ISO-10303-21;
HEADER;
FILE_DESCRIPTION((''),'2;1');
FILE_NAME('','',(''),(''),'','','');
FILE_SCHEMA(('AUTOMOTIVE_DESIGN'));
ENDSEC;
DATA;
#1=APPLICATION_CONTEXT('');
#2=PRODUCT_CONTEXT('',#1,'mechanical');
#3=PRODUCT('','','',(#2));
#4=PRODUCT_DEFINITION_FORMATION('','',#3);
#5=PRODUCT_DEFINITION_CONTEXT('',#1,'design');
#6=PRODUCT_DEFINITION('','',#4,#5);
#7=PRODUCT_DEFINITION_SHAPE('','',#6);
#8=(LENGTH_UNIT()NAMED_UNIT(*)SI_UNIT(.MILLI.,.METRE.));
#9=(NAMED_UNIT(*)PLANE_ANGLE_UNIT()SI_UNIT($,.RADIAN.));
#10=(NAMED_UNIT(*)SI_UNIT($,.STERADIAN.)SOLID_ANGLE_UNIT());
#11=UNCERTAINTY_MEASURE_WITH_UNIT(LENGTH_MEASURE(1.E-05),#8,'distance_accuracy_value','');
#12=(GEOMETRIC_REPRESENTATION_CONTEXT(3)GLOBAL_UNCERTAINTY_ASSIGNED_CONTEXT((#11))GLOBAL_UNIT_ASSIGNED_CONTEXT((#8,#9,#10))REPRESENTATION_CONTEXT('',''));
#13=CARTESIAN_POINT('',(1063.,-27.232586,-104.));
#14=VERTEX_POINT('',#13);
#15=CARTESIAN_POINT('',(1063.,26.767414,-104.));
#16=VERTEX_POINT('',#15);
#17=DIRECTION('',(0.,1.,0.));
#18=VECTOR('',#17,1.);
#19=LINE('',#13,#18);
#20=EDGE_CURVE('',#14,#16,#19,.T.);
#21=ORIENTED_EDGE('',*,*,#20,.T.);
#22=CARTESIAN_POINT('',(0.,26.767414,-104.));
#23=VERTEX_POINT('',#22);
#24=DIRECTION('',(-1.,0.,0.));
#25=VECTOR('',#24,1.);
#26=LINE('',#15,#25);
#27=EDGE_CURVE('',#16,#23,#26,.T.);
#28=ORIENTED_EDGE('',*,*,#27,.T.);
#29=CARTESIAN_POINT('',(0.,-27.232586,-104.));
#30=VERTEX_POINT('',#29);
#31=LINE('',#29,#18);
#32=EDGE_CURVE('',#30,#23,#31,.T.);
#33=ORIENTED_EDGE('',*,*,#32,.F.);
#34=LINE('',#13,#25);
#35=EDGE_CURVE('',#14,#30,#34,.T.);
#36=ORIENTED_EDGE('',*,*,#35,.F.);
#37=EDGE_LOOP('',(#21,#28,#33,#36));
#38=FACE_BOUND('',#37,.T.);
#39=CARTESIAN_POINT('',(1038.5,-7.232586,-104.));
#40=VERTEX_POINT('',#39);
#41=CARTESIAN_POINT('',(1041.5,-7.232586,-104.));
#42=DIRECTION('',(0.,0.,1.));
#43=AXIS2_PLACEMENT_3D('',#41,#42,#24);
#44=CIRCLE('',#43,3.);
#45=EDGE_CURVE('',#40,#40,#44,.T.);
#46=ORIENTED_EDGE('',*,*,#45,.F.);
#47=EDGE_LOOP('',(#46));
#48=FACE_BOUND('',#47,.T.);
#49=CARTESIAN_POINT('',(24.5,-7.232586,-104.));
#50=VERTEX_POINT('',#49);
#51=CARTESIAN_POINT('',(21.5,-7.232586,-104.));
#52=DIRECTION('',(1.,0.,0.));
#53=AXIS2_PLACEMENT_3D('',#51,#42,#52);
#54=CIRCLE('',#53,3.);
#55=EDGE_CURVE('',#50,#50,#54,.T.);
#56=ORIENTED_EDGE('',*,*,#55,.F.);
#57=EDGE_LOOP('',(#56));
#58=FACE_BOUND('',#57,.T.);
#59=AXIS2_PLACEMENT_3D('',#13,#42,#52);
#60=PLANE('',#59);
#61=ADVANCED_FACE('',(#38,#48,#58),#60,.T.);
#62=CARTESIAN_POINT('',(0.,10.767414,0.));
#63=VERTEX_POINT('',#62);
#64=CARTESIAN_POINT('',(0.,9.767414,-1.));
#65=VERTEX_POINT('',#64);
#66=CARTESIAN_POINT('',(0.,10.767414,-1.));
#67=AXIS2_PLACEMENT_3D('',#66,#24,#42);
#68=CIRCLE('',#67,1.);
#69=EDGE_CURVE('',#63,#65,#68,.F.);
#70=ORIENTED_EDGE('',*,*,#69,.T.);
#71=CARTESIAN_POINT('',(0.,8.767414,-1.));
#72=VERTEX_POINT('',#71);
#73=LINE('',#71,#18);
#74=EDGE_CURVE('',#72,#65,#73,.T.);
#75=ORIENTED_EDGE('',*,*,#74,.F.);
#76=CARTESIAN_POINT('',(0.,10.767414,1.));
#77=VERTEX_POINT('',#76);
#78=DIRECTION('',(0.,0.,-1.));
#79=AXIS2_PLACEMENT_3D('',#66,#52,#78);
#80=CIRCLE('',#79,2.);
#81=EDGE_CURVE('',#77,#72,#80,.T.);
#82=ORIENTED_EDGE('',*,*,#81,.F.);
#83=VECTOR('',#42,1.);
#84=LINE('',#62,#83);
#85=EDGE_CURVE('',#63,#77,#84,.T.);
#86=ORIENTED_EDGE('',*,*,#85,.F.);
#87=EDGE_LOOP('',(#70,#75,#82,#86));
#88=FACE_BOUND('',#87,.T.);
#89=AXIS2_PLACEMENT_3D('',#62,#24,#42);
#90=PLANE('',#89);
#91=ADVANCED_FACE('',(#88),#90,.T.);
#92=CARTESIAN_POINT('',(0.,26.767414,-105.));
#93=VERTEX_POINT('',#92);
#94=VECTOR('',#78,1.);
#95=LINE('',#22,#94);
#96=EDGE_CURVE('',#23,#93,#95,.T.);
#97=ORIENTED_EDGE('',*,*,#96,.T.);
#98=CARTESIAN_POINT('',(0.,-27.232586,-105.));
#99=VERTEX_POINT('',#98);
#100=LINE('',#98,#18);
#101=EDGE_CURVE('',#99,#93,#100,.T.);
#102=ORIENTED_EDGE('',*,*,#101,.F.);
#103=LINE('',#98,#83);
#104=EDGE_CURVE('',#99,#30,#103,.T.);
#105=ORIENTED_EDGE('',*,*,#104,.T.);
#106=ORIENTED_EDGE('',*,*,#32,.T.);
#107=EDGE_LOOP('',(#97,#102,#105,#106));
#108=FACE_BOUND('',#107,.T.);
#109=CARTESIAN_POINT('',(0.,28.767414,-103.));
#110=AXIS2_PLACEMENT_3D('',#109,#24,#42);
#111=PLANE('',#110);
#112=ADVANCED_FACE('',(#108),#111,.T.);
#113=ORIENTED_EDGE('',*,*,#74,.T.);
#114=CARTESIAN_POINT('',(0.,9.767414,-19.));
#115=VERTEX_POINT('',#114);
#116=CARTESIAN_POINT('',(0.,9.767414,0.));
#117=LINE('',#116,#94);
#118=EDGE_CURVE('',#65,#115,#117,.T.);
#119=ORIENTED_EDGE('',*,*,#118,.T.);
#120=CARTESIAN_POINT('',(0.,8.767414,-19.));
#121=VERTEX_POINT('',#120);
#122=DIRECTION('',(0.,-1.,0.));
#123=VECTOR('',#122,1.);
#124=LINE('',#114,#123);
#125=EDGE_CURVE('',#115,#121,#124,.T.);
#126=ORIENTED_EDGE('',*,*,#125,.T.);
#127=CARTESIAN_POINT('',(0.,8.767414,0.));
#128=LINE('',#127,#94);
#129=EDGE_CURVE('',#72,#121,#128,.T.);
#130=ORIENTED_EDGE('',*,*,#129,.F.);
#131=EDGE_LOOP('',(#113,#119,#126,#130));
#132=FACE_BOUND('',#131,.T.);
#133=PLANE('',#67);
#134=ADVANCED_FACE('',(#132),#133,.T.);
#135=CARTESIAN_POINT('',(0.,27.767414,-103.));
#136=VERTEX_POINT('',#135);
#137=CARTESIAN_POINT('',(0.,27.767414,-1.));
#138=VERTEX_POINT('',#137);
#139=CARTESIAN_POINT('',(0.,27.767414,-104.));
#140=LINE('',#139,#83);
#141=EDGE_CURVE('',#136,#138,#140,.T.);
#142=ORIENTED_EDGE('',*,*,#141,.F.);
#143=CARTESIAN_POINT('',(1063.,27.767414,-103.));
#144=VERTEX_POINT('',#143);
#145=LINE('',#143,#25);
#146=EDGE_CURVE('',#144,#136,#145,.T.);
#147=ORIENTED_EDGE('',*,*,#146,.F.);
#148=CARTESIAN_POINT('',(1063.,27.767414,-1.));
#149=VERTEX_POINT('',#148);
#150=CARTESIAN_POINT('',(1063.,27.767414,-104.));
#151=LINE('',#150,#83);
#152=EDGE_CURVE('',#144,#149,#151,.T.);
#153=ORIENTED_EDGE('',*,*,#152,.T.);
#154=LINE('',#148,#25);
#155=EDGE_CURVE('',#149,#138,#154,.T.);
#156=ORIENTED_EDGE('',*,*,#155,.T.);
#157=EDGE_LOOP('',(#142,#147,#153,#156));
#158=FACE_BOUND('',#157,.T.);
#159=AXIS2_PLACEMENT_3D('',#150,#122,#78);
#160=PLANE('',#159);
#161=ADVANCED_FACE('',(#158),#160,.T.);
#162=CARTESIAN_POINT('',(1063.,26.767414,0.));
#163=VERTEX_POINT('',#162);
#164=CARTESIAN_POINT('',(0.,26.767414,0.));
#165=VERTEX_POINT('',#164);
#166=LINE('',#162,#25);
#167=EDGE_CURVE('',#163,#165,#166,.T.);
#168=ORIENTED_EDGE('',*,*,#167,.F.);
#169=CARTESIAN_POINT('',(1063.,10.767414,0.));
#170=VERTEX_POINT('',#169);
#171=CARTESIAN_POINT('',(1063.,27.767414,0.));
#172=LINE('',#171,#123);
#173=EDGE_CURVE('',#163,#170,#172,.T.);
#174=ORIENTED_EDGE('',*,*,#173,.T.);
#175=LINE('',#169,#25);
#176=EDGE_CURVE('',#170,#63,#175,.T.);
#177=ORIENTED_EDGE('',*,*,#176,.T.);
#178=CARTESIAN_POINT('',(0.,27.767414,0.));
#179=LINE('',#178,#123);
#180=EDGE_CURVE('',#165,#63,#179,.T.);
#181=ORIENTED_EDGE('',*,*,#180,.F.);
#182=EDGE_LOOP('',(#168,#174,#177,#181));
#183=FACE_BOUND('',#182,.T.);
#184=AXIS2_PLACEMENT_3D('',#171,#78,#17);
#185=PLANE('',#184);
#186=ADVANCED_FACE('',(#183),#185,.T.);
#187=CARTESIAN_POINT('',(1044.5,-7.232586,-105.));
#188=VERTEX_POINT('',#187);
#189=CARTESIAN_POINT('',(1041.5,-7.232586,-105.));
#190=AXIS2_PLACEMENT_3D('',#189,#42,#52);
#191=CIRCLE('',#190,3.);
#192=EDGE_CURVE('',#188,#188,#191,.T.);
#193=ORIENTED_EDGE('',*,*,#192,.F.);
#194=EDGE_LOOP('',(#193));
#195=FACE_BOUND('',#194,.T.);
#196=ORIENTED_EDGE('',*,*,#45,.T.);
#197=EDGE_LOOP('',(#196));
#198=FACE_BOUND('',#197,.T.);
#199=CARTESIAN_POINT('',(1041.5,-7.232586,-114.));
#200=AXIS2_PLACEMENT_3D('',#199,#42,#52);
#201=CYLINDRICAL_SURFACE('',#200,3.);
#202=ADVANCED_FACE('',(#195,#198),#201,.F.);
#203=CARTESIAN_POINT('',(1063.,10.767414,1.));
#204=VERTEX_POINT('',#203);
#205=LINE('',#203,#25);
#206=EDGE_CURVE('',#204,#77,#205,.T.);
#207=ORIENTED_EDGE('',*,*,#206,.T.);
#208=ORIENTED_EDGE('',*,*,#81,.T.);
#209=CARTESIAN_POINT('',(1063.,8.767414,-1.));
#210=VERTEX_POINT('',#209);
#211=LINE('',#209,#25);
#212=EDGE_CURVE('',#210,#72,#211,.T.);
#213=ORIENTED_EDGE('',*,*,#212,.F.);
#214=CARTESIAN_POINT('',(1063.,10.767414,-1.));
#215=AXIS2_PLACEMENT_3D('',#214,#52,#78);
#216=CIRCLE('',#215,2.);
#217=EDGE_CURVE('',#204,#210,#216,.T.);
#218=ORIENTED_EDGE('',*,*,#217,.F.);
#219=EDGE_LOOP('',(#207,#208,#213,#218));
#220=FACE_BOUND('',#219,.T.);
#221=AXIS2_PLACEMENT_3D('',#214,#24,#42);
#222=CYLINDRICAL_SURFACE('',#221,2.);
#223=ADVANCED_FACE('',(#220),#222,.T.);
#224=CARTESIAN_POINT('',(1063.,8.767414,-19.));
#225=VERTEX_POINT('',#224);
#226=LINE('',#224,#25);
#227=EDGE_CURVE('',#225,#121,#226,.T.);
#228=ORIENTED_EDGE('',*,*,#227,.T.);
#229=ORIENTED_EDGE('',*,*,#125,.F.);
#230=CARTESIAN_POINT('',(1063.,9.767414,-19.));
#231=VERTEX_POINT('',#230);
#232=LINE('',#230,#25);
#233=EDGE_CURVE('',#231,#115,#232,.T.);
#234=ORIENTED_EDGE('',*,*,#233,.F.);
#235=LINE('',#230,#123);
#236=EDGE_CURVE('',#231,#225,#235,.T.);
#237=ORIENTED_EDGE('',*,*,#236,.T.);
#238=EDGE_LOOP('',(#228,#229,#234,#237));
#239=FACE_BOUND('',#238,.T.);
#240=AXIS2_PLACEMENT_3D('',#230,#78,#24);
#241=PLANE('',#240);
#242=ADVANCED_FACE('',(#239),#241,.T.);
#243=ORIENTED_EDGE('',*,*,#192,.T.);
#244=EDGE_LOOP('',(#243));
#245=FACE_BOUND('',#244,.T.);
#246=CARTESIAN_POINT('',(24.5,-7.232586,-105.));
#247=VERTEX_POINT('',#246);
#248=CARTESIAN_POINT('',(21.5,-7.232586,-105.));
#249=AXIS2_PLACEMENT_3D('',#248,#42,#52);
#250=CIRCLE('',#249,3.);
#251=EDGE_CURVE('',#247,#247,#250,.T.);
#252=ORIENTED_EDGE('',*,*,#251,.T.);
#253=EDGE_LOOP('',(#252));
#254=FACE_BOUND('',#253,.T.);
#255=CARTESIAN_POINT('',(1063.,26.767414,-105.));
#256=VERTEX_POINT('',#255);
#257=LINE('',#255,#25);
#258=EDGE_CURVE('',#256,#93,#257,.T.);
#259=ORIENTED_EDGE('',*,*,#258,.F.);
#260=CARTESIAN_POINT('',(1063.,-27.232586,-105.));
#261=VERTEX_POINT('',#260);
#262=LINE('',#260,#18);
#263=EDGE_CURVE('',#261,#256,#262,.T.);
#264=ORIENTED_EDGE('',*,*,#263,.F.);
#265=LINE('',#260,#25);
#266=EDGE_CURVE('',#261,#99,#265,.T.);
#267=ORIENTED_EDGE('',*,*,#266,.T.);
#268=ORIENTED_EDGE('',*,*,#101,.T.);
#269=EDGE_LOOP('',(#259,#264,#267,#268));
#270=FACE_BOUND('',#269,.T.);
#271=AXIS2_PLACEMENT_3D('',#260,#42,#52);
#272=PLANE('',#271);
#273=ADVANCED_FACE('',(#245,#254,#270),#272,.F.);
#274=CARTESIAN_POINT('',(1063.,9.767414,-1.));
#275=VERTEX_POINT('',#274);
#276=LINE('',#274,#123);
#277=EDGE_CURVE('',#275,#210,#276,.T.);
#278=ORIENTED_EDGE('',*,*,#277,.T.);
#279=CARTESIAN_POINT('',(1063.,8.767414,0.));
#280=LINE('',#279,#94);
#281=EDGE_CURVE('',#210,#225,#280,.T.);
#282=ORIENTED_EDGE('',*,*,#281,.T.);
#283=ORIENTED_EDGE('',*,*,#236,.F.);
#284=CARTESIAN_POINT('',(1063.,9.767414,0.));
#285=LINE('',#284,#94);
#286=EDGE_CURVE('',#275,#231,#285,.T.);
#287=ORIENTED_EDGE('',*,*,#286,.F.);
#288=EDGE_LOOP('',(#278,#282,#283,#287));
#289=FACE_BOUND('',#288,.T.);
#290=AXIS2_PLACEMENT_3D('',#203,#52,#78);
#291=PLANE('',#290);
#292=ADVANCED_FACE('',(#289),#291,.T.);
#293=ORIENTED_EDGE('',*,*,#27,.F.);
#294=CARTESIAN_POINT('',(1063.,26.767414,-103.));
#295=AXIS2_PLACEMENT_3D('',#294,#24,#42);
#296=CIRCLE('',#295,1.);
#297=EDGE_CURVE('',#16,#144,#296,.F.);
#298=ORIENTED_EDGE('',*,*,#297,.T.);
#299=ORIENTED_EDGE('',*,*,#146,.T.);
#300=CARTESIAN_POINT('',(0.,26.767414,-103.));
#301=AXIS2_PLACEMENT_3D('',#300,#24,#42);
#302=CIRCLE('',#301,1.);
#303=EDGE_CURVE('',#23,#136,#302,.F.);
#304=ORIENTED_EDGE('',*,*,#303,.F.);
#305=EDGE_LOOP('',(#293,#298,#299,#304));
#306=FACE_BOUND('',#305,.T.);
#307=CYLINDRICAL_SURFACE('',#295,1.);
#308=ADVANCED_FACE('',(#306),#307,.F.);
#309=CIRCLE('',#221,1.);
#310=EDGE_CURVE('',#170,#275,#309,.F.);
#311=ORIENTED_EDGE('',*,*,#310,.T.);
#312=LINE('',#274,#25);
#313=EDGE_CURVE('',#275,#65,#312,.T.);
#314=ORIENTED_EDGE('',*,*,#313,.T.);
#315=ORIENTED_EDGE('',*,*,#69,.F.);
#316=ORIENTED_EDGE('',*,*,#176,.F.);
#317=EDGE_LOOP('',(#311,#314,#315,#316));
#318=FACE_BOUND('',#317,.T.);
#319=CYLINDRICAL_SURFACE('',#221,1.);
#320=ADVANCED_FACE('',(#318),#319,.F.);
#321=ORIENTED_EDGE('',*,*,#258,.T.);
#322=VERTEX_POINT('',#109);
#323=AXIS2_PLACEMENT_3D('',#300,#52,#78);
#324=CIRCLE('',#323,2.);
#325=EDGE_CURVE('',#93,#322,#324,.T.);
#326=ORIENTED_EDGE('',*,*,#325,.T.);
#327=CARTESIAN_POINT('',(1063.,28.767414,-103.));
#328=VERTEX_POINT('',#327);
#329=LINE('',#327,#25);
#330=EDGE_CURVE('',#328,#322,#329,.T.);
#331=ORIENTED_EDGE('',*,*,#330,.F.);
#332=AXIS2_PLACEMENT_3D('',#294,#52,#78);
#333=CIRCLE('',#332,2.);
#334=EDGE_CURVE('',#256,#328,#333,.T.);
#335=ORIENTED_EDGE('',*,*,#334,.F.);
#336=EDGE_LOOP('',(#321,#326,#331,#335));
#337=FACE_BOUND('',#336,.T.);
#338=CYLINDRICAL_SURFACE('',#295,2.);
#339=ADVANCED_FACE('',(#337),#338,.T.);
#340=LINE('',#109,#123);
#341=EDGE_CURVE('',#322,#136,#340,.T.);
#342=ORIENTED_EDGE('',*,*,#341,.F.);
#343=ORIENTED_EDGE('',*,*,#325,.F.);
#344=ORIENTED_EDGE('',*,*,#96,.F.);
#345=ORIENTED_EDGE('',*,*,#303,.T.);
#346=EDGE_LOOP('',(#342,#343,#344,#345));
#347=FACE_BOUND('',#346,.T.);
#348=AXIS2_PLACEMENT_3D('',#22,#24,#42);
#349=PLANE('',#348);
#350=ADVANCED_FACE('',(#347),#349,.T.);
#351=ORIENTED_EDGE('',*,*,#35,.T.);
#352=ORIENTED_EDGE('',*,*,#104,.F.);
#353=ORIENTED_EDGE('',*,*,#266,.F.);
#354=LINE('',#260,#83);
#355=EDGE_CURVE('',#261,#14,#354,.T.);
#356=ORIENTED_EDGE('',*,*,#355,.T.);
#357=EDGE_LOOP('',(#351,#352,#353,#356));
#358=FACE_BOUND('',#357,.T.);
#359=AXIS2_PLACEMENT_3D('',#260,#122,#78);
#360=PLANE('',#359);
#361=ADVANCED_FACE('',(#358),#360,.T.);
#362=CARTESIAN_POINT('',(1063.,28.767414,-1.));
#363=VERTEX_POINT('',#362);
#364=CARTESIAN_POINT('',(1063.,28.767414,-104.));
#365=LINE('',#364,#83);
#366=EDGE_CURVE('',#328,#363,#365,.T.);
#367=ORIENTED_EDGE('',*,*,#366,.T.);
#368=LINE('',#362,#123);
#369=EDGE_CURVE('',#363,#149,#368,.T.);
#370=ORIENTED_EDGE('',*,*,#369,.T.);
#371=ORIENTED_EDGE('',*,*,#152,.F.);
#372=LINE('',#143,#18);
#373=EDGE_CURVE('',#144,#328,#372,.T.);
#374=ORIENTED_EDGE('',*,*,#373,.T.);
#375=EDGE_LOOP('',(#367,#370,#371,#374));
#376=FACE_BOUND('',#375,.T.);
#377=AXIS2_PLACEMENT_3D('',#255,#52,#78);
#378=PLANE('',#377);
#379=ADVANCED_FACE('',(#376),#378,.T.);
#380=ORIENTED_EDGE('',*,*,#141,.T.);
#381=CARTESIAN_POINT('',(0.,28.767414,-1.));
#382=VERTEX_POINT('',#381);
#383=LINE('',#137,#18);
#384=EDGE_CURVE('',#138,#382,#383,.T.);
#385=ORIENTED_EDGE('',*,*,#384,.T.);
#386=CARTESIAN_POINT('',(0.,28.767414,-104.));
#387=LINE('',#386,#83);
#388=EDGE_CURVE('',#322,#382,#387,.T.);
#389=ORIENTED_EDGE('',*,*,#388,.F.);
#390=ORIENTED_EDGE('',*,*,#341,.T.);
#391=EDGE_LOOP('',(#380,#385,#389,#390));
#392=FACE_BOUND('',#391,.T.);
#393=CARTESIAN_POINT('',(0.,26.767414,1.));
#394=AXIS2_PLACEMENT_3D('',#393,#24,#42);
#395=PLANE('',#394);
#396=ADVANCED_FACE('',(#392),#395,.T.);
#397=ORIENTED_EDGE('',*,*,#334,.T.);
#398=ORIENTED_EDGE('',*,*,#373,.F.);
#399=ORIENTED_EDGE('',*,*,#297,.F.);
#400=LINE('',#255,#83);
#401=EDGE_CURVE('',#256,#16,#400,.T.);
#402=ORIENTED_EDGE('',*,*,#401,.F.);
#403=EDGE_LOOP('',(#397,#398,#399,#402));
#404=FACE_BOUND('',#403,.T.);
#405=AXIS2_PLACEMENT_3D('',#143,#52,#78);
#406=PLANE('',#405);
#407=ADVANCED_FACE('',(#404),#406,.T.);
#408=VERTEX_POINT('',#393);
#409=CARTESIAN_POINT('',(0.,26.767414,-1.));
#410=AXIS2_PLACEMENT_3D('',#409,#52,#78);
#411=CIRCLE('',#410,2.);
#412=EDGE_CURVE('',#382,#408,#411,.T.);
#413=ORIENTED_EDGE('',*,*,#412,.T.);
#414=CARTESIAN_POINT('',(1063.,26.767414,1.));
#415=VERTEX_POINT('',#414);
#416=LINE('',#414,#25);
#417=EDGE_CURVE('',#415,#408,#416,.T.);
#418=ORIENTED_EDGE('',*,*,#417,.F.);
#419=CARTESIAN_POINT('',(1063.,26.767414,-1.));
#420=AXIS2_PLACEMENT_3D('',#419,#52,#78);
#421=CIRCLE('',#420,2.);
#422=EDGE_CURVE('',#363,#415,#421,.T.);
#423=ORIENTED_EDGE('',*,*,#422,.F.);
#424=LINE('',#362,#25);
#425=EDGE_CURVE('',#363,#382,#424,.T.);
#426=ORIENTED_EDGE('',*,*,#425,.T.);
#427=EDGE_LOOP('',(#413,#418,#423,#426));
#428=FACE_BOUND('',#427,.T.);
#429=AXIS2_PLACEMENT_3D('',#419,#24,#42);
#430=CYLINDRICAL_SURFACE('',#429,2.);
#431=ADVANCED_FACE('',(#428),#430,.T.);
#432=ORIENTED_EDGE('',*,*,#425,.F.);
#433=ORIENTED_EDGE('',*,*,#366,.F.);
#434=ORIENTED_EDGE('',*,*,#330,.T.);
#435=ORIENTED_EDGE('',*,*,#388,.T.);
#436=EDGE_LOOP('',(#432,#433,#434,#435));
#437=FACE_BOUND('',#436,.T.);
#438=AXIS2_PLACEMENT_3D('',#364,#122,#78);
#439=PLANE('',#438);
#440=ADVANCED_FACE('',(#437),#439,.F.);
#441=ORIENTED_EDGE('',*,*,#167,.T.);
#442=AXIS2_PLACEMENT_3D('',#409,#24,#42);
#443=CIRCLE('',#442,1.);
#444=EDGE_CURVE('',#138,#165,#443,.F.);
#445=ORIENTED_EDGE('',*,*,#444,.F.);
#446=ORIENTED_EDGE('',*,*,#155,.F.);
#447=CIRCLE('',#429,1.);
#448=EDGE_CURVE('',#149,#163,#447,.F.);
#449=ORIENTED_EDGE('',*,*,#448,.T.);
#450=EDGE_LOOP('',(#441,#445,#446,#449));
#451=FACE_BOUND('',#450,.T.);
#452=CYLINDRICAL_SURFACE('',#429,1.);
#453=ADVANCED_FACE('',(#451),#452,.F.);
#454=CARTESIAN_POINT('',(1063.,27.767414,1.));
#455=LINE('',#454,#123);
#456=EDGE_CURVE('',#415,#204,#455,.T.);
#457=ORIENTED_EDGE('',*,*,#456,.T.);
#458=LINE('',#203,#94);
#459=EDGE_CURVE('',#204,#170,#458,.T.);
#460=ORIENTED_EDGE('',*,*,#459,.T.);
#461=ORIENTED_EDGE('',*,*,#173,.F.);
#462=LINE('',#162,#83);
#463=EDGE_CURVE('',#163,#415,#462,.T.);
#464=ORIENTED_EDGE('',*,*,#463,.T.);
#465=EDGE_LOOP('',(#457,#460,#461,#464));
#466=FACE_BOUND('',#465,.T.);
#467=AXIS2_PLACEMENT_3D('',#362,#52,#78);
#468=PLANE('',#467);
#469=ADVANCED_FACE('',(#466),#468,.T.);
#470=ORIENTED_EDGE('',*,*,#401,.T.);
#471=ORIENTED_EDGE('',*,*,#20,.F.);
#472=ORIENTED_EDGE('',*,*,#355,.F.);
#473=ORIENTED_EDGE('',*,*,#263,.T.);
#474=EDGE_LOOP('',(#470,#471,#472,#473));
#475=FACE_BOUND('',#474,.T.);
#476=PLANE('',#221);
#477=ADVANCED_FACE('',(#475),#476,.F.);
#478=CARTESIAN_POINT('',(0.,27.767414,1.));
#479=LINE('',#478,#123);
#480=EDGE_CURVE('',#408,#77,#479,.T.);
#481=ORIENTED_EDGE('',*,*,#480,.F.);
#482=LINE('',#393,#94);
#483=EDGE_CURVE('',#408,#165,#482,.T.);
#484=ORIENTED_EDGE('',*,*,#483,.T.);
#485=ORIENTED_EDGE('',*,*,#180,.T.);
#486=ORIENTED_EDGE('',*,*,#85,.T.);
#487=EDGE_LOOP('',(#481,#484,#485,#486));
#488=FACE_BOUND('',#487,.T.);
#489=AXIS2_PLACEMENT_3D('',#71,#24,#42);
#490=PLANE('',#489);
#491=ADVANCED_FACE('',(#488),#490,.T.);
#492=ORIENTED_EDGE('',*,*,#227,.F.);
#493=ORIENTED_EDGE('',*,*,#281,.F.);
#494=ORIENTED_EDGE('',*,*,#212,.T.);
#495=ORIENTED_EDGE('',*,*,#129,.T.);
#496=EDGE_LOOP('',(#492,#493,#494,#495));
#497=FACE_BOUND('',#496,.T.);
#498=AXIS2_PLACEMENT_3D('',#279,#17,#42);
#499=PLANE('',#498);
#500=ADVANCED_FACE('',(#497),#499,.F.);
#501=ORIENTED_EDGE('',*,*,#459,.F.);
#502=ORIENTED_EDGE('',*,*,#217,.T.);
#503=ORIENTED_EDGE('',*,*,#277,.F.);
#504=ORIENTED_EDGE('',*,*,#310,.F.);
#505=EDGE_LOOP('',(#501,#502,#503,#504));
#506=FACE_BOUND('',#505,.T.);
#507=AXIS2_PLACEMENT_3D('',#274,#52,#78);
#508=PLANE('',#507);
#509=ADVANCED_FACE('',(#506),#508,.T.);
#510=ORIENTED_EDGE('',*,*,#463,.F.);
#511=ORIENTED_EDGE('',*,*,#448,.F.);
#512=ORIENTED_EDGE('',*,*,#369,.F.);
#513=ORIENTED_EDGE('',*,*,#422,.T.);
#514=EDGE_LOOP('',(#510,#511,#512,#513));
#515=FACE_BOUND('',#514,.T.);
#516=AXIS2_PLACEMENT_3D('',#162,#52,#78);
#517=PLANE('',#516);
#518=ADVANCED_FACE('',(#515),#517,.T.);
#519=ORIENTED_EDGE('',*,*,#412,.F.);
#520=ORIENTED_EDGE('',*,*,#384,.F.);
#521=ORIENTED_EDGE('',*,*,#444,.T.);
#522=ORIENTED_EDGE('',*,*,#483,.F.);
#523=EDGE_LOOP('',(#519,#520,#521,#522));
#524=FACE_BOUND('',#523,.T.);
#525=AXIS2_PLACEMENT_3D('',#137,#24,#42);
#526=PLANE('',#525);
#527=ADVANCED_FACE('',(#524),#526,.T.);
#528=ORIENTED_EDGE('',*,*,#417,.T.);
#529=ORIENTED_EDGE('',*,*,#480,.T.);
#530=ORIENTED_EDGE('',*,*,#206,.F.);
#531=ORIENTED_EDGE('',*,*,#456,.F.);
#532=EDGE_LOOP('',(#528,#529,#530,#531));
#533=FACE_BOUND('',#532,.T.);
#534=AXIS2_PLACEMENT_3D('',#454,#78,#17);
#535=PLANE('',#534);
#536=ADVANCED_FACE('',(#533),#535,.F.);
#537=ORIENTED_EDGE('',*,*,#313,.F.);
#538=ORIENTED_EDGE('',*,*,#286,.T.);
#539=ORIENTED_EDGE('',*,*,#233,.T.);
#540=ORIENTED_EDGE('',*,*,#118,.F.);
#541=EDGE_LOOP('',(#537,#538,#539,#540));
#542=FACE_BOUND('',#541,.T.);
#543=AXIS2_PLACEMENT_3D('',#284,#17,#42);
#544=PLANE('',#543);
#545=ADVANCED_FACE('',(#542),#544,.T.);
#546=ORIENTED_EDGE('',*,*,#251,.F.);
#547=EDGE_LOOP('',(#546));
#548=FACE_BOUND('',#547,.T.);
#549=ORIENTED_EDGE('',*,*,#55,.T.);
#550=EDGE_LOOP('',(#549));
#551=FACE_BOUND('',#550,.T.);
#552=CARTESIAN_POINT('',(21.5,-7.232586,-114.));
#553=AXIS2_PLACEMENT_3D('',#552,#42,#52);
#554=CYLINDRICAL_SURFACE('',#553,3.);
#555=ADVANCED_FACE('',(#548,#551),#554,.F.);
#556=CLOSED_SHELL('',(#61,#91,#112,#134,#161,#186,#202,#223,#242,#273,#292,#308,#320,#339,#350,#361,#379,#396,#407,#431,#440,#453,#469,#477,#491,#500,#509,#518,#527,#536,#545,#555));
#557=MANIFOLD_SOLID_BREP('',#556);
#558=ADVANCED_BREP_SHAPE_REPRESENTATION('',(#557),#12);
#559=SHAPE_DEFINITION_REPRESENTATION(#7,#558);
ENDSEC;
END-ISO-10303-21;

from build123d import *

# Parameters (mm, degrees)
BASE_FLANGE1_DEPTH = 1063
SKETCH2_R          = 3
CUT_EXTRUDE1_DEPTH = 10


# Sheet-metal steps are written as plain solids
with BuildPart() as part:
    # Sketch1 → Base-Flange1 (new body)
    with BuildSketch(Plane(origin=(0, 0, 0), x_dir=(0, 0, -1), z_dir=(1, 0, 0))):
        with BuildLine():
            Line((104, -27.232585832), (104, 26.767414168))
            ThreePointArc((104, 26.767414168), (103.707106781, 27.474520949), (103, 27.767414168))
            Line((103, 27.767414168), (1, 27.767414168))
            ThreePointArc((1, 27.767414168), (0.292893219, 27.474520949), (0, 26.767414168))
            Line((0, 26.767414168), (0, 10.767414168))
            ThreePointArc((0, 10.767414168), (0.292893219, 10.060307386), (1, 9.767414168))
            Line((1, 9.767414168), (19, 9.767414168))
            Line((19, 9.767414168), (19, 8.767414168))
            Line((19, 8.767414168), (1, 8.767414168))
            ThreePointArc((1, 8.767414168), (-0.414213562, 9.353200605), (-1, 10.767414168))
            Line((-1, 10.767414168), (-1, 26.767414168))
            ThreePointArc((-1, 26.767414168), (-0.414213562, 28.18162773), (1, 28.767414168))
            Line((1, 28.767414168), (103, 28.767414168))
            ThreePointArc((103, 28.767414168), (104.414213562, 28.18162773), (105, 26.767414168))
            Line((105, 26.767414168), (105, -27.232585832))
            Line((105, -27.232585832), (104, -27.232585832))
        make_face()
    extrude(amount=BASE_FLANGE1_DEPTH)

    # Sketch2 → Cut-Extrude1 (cut)
    with BuildSketch(Plane.XY.offset(-104)):
        with Locations((21.5, -7.232585832)):
            Circle(SKETCH2_R)
        with Locations((1041.5, -7.232585832)):
            Circle(SKETCH2_R)
    extrude(amount=-CUT_EXTRUDE1_DEPTH, mode=Mode.SUBTRACT)


solid = part.part
